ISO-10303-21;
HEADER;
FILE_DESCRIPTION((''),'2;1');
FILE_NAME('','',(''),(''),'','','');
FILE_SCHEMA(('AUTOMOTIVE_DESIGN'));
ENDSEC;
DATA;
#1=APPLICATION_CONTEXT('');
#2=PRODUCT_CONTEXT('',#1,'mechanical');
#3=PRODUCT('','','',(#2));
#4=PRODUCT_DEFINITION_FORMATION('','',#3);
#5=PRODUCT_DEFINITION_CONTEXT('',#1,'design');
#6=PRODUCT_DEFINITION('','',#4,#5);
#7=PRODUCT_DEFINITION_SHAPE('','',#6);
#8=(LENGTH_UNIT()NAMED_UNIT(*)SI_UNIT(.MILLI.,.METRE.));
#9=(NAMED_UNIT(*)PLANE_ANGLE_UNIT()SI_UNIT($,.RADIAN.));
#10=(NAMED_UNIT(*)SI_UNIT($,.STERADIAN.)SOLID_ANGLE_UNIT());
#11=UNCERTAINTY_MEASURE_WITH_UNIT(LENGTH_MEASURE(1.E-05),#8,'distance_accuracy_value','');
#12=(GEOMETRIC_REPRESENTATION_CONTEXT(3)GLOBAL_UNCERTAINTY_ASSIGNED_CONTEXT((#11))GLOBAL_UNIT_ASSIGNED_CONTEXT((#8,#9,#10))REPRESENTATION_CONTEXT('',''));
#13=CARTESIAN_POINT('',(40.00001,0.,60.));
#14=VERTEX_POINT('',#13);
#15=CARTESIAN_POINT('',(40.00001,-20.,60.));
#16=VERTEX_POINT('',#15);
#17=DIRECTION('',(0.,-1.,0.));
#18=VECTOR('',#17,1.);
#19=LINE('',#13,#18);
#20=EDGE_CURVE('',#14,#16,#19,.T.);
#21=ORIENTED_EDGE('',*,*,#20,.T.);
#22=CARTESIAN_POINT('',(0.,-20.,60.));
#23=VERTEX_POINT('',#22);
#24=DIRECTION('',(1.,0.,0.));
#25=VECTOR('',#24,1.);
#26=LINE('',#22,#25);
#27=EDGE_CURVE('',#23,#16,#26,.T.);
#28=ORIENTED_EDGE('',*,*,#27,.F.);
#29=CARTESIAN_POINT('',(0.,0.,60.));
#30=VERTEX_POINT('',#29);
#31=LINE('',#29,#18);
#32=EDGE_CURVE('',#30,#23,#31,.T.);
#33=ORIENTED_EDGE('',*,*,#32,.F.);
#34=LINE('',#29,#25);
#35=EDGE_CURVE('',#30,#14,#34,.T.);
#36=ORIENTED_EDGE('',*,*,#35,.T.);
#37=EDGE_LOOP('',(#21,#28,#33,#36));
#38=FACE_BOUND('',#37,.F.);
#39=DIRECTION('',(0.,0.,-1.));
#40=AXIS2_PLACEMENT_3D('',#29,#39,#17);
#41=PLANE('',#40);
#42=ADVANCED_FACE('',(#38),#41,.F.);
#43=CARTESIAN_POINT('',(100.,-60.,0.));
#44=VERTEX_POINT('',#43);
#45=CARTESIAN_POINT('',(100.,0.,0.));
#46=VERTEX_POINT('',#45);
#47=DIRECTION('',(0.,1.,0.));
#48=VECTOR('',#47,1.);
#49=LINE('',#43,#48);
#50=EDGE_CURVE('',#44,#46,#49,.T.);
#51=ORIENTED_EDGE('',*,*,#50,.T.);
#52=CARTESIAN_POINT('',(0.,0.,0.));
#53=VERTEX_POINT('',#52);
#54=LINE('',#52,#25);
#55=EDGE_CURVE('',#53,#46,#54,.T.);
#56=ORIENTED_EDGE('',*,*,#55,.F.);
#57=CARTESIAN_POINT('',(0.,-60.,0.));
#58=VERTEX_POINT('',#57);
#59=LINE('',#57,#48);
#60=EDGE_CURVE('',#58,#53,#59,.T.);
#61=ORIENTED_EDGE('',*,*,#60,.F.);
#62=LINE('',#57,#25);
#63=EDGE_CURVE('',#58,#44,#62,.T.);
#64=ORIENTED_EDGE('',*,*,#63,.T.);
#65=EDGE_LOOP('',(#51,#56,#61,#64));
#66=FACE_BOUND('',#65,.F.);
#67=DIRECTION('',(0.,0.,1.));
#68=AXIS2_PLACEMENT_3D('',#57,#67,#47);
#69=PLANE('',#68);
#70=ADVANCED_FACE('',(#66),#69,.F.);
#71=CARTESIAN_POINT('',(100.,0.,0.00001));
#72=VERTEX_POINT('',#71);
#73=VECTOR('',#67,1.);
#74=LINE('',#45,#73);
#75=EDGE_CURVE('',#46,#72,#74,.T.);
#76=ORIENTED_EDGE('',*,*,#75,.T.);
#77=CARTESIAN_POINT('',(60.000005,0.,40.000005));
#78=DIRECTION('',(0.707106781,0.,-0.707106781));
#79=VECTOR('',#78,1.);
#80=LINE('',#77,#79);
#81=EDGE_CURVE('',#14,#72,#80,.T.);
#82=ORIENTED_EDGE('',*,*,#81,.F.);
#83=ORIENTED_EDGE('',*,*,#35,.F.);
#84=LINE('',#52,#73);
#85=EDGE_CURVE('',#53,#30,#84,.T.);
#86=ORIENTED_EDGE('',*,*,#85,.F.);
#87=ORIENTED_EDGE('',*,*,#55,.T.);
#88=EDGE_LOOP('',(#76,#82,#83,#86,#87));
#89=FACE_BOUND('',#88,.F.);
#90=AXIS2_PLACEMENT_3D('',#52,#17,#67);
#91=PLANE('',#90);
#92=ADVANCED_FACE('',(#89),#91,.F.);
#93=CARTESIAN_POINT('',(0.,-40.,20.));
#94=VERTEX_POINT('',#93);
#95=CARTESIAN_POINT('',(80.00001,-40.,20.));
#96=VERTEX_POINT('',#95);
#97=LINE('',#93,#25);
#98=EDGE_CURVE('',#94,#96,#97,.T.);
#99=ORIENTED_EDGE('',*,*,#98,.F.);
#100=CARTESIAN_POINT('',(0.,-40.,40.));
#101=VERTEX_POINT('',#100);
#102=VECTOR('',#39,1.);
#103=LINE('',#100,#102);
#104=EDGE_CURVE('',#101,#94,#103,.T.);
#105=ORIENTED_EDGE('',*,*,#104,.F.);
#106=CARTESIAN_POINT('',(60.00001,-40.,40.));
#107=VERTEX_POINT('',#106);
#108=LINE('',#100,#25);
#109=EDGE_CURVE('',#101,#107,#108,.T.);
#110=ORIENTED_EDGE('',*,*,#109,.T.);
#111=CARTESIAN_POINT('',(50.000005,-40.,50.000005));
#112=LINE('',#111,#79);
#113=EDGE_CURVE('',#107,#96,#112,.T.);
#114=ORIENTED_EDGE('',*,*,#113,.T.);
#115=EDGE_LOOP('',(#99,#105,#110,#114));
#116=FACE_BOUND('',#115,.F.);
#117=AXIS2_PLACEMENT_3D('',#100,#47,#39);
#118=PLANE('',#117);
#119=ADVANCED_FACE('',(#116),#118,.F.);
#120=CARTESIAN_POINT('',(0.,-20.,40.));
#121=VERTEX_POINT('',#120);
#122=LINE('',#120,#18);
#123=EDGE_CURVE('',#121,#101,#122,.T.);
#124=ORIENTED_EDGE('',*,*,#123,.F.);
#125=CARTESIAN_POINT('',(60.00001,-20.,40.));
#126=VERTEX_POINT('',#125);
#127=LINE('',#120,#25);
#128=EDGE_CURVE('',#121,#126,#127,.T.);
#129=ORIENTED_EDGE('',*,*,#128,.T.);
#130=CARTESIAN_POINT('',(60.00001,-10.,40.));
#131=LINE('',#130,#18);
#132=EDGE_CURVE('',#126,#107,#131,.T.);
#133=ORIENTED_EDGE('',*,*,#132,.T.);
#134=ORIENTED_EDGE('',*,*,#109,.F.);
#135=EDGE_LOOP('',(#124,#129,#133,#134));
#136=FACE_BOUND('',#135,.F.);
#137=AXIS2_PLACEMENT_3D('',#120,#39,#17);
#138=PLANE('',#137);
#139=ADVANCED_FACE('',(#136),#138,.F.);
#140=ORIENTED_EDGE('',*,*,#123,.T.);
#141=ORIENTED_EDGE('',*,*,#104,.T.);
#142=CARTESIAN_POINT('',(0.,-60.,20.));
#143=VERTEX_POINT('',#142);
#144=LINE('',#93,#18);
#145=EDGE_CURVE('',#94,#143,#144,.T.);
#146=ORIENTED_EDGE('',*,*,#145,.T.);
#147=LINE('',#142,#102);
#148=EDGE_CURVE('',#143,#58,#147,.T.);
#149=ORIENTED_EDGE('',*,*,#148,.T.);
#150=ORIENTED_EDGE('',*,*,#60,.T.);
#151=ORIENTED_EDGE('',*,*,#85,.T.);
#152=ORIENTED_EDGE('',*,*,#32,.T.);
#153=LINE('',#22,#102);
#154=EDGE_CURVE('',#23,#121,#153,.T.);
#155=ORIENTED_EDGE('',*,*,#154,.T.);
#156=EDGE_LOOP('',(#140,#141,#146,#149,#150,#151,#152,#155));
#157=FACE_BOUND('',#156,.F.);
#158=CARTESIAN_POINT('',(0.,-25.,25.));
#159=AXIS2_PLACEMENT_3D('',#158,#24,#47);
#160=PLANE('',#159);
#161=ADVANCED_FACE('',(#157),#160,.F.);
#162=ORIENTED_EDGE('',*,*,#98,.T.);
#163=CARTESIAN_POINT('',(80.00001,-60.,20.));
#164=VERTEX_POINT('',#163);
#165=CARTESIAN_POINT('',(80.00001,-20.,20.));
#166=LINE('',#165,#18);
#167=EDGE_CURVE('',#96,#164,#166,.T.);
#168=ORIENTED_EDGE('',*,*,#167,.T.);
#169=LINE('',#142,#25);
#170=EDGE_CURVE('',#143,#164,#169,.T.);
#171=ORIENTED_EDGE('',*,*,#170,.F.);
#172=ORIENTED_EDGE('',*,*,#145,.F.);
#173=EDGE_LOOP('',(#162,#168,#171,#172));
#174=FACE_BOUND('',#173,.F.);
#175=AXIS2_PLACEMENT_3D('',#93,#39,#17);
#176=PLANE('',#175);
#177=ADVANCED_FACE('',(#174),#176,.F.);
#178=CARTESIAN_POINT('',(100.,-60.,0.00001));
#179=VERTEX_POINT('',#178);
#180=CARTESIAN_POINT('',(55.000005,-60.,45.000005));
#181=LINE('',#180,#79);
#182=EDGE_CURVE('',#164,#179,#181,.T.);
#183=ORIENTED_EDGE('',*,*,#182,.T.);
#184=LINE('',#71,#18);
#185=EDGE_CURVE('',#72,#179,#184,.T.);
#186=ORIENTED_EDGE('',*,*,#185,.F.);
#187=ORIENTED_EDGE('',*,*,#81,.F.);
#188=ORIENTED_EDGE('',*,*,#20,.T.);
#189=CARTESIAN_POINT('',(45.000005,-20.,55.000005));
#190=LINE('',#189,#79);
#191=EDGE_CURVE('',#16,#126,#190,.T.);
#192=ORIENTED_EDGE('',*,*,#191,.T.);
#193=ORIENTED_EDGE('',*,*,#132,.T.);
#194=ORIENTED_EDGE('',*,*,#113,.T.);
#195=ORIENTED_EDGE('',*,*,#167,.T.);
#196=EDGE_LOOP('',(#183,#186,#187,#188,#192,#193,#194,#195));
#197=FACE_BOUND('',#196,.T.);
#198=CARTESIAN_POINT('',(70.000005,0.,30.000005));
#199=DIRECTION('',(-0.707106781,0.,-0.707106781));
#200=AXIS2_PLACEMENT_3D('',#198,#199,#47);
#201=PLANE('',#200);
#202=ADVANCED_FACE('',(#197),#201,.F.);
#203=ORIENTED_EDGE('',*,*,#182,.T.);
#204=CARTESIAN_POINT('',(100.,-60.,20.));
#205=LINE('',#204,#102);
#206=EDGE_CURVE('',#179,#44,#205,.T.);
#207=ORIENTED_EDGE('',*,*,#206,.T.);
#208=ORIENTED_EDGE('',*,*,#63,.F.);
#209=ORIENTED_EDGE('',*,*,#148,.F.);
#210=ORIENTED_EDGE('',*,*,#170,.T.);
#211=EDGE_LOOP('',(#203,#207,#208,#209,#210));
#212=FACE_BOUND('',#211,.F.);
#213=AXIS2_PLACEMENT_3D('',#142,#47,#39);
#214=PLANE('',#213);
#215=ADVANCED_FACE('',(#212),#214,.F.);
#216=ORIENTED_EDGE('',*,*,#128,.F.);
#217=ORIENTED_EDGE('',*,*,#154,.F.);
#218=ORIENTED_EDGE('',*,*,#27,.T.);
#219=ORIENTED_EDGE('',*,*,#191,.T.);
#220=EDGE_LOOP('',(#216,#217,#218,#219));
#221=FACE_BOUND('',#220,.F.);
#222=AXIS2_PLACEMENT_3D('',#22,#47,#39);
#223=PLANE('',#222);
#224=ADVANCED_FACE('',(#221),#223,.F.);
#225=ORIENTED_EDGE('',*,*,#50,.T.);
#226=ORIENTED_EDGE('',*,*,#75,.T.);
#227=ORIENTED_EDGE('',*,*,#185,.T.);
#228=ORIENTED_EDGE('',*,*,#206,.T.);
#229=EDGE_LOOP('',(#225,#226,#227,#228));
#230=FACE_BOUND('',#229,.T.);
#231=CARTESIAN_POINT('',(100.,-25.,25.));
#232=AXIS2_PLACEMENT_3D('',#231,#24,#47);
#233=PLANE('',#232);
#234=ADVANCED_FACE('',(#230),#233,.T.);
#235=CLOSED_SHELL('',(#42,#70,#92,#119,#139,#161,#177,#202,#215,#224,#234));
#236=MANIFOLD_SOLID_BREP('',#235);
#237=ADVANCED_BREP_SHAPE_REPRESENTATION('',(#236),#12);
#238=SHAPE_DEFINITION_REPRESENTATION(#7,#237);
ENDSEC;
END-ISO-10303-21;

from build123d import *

# Parameters (mm, degrees)
F1_DEPTH = 100
F2_SIZE  = 59.99999


# Not quite as in the source:
# - a fillet or chamfer is up to 0.001 mm smaller than in the source, because OpenCascade refuses the exact size


with BuildPart() as f1:
    # F0 (on Right) → F1 (new body)
    with BuildSketch(Plane.YZ):
        Polygon((-60, 0), (0, 0), (0, 60), (-20, 60), (-20, 40), (-40, 40), (-40, 20), (-60, 20), align=None)
    extrude(amount=F1_DEPTH)

    # F2 (size 60 in the source; OpenCascade refuses exactly that, so slightly less here)
    f2_edges = [f1.edges().sort_by_distance(p)[0] for p in [
        (100, -10, 60),
    ]]
    chamfer(f2_edges, length=F2_SIZE)


solid = f1.part
